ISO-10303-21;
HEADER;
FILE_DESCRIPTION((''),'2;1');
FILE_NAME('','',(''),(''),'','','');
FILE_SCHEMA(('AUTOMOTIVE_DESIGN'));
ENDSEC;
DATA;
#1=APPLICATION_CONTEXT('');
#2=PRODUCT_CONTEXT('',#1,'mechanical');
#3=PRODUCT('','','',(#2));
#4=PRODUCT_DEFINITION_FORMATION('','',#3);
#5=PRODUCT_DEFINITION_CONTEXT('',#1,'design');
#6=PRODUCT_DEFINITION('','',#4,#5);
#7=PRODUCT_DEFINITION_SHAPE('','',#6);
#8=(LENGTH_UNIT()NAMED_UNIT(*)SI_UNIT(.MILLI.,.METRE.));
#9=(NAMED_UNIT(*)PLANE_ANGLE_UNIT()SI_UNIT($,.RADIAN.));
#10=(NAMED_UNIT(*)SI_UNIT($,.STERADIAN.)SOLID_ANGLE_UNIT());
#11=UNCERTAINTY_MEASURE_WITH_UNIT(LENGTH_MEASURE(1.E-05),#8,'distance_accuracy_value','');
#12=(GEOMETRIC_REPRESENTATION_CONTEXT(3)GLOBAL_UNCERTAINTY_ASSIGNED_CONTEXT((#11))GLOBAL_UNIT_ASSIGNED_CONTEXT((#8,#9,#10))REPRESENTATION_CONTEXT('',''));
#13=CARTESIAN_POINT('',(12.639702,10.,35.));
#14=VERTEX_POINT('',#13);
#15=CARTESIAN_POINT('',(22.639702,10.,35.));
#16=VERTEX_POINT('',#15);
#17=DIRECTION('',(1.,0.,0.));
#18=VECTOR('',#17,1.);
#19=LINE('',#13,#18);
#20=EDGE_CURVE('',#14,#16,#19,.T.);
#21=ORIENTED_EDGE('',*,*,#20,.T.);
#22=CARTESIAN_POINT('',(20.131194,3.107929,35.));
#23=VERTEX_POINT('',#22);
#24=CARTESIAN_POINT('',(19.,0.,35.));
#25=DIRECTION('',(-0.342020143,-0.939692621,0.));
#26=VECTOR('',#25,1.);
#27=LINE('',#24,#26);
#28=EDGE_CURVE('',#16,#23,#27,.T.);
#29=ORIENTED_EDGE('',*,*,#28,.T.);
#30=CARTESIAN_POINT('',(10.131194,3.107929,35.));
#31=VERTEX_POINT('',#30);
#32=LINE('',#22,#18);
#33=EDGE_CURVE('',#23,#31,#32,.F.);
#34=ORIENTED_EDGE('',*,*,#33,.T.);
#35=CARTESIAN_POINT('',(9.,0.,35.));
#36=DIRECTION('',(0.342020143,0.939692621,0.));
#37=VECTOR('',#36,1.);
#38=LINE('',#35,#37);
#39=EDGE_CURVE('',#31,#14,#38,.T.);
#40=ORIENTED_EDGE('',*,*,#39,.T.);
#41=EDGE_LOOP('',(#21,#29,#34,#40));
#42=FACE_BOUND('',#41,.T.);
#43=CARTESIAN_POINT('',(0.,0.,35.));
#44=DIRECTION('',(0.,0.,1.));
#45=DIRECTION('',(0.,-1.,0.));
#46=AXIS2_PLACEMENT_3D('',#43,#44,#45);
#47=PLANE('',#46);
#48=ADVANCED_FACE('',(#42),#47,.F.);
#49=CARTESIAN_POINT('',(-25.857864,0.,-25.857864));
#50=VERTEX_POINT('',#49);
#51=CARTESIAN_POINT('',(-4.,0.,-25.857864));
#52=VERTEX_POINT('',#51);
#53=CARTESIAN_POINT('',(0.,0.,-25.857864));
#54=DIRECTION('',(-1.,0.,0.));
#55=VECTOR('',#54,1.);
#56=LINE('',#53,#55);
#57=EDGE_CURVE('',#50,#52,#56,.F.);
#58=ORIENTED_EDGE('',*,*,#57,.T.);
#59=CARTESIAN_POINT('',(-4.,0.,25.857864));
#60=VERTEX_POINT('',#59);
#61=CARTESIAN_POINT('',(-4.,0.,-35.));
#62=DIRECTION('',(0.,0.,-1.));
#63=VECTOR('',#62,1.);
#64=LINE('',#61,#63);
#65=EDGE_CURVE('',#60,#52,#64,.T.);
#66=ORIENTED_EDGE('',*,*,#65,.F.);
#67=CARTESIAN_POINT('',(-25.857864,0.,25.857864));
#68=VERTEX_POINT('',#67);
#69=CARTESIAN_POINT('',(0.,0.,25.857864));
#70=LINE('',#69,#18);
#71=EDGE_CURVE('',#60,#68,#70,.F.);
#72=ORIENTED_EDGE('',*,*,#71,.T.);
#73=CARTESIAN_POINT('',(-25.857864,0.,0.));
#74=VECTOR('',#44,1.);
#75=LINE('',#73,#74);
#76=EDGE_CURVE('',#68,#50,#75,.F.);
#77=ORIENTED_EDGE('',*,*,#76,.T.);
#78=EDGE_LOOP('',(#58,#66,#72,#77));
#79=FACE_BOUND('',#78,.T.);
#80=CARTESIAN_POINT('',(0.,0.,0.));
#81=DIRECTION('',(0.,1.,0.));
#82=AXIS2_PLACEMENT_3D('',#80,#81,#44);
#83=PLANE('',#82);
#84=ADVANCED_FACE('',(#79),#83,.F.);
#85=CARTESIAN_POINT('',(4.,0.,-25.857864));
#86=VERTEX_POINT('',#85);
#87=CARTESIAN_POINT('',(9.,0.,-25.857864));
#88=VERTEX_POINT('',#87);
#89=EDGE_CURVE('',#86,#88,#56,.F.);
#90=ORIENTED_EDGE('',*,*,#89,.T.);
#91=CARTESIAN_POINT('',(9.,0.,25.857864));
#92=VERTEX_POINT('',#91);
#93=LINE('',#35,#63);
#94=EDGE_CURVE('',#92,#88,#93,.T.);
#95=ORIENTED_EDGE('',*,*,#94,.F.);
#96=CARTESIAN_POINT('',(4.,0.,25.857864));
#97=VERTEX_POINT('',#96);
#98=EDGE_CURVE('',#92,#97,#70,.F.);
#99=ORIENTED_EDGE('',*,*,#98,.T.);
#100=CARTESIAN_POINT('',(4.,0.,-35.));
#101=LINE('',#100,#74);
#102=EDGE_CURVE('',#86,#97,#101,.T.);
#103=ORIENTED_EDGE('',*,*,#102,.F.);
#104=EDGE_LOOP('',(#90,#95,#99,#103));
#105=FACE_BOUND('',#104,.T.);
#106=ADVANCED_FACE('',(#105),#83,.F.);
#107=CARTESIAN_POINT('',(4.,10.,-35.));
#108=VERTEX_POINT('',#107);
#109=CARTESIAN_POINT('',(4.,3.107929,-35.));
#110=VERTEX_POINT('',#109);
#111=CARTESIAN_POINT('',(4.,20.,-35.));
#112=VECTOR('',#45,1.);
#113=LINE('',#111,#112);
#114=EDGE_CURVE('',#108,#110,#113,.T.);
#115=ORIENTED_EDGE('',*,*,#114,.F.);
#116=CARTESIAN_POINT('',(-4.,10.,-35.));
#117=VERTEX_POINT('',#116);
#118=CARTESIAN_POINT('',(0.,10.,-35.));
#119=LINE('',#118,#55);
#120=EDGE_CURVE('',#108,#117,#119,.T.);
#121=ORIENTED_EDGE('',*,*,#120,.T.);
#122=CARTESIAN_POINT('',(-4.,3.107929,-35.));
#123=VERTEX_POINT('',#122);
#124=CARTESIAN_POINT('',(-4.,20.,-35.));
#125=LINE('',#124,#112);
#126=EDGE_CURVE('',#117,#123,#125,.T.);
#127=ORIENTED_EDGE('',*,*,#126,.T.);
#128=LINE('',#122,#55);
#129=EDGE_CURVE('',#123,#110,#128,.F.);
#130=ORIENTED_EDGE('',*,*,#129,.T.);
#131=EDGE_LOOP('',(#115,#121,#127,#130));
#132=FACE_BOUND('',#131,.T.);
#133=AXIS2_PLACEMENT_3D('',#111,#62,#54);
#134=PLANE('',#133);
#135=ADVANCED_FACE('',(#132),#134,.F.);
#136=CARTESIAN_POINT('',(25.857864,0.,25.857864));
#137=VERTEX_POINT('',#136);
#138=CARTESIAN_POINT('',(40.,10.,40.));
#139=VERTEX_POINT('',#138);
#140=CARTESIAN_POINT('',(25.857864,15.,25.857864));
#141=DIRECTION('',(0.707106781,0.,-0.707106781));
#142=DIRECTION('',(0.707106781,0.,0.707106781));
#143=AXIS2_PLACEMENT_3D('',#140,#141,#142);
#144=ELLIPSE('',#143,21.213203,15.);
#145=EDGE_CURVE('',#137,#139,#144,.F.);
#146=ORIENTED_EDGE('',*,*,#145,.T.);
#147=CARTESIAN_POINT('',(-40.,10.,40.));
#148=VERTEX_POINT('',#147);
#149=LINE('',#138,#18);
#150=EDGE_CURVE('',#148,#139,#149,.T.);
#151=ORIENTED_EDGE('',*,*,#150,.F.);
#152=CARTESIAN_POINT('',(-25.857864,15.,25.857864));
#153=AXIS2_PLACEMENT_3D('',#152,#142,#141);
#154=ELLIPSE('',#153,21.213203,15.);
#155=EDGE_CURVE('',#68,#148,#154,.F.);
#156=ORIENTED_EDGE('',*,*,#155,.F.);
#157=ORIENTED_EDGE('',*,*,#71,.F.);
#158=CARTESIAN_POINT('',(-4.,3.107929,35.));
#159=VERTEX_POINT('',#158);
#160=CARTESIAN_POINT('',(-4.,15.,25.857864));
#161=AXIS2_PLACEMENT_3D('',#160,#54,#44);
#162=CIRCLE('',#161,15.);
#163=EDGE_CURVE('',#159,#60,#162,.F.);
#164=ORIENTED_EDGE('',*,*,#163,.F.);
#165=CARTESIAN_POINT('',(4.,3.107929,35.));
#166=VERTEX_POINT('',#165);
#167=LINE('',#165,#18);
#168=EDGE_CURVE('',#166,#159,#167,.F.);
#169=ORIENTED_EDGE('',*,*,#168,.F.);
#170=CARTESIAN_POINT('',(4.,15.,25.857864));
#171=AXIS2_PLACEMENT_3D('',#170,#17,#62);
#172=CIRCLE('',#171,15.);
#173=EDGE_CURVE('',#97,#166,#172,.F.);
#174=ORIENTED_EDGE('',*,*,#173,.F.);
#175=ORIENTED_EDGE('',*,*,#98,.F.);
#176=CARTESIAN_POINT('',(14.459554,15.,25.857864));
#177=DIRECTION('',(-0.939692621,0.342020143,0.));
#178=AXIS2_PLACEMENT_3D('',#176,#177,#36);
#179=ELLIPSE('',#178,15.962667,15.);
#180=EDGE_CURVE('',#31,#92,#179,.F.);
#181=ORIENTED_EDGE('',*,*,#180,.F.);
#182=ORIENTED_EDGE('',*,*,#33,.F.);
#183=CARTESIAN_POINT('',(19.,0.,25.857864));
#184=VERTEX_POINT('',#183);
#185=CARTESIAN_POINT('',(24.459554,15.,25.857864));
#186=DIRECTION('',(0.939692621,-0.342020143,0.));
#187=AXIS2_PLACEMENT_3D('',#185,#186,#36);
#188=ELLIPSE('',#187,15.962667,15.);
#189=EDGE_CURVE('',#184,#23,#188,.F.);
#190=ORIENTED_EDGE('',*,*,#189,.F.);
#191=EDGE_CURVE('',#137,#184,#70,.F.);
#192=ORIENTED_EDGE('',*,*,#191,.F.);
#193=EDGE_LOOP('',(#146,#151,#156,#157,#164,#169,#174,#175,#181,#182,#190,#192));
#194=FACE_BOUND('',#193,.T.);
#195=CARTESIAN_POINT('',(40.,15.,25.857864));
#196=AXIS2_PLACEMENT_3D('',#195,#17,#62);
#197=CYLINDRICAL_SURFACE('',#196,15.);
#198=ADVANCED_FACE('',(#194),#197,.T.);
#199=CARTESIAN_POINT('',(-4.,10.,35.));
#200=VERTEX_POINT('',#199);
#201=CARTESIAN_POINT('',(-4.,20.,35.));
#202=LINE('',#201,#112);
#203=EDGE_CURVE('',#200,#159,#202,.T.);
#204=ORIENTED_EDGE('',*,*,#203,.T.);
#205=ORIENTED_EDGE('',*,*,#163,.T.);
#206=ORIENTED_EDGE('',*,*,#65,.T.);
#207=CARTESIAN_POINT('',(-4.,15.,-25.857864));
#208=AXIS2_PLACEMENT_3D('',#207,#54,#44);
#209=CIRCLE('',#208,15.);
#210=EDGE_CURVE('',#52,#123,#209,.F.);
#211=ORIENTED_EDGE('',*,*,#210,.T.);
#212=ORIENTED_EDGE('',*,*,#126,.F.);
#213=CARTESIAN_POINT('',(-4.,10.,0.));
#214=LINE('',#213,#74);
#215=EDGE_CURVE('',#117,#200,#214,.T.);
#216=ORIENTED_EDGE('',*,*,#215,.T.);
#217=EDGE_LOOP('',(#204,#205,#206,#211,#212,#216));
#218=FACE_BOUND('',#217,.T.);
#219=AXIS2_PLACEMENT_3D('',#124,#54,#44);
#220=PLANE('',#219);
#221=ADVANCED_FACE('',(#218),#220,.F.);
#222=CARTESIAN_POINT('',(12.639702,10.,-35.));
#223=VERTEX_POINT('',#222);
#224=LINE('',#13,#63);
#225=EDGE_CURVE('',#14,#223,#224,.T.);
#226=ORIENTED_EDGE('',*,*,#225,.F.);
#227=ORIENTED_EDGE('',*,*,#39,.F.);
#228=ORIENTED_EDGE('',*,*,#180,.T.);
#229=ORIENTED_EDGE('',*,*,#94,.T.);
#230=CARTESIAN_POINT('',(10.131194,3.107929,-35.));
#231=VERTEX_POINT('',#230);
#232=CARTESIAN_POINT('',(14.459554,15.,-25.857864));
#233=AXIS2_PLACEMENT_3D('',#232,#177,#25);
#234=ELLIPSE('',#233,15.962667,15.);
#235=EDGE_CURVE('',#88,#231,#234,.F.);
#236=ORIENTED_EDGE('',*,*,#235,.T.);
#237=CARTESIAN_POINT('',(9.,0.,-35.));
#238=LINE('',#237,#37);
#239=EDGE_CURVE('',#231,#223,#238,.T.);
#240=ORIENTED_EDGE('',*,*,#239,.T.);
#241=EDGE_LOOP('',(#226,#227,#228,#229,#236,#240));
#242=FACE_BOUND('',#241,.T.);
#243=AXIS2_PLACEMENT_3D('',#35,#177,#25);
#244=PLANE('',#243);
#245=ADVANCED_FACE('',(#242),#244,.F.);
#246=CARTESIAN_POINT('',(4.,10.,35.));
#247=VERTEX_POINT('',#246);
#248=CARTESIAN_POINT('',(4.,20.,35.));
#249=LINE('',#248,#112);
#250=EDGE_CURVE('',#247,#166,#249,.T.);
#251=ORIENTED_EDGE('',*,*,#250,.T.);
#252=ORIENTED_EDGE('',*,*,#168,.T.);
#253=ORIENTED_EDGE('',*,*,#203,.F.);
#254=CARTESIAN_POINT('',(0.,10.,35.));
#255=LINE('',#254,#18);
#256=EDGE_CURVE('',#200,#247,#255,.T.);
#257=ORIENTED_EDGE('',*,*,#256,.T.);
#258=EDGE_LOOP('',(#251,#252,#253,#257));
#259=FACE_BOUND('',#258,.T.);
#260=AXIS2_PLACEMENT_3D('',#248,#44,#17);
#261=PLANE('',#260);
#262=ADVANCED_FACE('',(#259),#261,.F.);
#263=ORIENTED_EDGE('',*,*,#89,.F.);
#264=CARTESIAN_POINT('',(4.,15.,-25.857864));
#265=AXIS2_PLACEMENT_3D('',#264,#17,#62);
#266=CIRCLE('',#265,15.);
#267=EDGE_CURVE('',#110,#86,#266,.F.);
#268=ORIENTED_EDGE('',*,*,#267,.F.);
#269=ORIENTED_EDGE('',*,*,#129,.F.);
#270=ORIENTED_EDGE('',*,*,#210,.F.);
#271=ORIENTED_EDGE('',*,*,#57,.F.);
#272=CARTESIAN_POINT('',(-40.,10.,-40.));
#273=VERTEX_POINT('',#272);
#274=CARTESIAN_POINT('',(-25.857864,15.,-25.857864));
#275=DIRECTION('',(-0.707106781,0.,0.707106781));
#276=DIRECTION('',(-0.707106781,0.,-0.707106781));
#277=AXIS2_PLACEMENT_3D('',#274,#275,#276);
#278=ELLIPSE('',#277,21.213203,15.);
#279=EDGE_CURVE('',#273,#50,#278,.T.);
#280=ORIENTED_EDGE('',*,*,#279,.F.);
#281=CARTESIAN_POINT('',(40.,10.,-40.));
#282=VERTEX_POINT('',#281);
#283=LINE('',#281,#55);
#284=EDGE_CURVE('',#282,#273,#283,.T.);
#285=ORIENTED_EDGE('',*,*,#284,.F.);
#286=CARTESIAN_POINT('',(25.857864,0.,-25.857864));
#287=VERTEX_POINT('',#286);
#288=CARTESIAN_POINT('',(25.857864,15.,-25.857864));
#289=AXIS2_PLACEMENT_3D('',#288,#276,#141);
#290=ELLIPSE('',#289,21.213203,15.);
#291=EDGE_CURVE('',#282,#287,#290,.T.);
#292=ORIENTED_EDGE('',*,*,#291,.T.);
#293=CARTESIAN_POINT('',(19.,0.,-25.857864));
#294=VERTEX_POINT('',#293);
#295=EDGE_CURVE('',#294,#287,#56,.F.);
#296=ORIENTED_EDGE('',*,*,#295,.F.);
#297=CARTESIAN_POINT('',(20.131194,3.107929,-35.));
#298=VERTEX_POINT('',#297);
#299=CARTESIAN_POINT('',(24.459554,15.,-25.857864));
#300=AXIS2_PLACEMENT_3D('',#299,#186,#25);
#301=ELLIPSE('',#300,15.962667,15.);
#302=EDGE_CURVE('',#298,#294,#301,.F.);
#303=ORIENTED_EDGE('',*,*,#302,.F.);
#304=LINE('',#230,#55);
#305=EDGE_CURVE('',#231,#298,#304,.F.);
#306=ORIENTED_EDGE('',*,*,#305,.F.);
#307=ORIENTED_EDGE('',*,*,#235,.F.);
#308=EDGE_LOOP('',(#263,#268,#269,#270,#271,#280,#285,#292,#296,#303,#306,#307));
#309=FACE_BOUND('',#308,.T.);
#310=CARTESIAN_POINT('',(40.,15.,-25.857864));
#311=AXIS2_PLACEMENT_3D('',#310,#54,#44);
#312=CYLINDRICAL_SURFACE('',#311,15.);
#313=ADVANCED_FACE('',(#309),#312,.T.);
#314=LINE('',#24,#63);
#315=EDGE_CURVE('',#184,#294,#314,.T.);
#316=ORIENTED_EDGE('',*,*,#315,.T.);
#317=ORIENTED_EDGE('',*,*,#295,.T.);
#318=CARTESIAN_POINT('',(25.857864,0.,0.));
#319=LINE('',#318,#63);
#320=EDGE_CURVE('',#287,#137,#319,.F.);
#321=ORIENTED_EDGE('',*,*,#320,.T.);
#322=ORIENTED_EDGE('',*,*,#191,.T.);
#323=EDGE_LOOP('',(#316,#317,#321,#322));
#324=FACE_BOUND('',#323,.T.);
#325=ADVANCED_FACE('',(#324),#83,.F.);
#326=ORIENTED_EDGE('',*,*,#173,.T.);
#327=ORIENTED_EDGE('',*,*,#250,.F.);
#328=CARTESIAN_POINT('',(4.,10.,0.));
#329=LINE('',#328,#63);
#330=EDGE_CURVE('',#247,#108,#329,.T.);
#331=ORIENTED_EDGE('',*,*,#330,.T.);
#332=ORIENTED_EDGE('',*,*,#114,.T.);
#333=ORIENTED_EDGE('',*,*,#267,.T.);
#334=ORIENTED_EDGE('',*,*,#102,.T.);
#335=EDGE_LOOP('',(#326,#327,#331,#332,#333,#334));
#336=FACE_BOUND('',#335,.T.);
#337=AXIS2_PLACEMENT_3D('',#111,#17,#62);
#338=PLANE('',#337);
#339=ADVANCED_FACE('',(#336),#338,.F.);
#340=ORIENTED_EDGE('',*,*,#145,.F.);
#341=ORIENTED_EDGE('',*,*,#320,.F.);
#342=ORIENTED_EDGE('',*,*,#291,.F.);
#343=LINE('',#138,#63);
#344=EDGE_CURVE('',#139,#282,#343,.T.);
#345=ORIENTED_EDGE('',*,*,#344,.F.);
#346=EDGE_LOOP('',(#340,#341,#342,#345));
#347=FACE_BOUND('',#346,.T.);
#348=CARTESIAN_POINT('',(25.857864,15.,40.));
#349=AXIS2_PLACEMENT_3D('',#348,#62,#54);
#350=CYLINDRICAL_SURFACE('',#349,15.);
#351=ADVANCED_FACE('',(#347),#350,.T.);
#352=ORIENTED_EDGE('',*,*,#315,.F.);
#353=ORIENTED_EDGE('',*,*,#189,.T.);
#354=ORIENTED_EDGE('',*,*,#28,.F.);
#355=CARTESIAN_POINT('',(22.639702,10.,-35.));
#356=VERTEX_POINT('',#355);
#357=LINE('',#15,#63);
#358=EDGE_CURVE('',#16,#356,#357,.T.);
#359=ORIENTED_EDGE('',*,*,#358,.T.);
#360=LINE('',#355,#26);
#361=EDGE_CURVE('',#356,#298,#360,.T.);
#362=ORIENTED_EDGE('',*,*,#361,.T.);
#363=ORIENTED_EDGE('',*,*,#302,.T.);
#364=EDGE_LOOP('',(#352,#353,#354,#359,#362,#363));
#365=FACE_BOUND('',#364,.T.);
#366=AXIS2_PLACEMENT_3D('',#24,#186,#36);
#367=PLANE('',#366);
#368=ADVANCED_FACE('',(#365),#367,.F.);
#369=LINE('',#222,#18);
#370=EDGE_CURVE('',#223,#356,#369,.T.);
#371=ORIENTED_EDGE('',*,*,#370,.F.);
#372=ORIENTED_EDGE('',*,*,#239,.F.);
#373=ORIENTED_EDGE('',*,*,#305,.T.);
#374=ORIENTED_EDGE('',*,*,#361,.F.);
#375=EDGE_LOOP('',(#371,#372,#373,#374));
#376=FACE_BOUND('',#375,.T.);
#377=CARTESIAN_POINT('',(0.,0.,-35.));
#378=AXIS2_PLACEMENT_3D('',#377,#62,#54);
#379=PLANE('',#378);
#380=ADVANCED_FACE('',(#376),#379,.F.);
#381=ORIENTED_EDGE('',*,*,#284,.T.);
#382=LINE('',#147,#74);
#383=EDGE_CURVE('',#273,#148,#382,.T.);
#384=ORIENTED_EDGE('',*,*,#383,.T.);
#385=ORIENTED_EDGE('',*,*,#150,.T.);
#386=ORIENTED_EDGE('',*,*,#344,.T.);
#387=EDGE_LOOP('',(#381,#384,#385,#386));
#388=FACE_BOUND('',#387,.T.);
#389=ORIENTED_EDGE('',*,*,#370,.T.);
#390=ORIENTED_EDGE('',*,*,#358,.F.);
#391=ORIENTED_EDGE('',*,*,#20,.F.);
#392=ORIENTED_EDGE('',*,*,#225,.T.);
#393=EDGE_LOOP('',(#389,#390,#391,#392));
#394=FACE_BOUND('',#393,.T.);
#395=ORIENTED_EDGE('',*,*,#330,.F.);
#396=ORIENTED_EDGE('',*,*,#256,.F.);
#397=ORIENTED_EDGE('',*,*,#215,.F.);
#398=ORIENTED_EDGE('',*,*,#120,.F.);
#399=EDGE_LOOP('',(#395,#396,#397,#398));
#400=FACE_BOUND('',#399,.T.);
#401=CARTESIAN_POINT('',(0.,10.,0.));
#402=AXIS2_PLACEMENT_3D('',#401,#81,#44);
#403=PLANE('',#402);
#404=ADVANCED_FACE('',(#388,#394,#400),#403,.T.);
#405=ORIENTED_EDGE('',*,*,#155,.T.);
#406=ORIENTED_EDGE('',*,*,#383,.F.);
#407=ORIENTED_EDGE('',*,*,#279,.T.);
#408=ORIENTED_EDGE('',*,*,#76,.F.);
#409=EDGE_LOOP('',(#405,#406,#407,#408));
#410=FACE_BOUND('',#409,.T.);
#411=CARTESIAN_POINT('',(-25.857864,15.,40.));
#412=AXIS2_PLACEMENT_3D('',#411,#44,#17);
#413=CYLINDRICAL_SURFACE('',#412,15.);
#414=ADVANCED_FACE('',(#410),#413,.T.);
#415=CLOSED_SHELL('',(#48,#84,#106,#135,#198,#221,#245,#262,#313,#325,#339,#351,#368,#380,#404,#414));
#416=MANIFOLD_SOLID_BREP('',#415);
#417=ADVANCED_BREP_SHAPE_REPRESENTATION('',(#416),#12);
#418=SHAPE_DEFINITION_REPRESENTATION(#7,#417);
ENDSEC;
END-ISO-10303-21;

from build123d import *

# Parameters (mm, degrees)
SKETCH1_W           = 80
SKETCH1_H           = 80
BOSS_EXTRUDE1_DEPTH = 10
SKETCH2_W           = 8
SKETCH2_H           = 70
CUT_EXTRUDE1_DEPTH  = 20
CUT_EXTRUDE17_DEPTH = 75
BOSS_EXTRUDE2_DEPTH = 5
FILLET1_R           = 15


with BuildPart() as part:
    # Sketch1 → Boss-Extrude1 (new body)
    with BuildSketch(Plane(origin=(0, 0, 0), x_dir=(1, 0, 0), z_dir=(0, 1, 0))):
        Rectangle(SKETCH1_W, SKETCH1_H)
    extrude(amount=BOSS_EXTRUDE1_DEPTH)

    # Sketch2 → Cut-Extrude1 (cut)
    with BuildSketch(Plane.XZ):
        Rectangle(SKETCH2_W, SKETCH2_H)
    extrude(amount=-CUT_EXTRUDE1_DEPTH, mode=Mode.SUBTRACT)

    # Sketch8 → Cut-Extrude17 (cut)
    with BuildSketch(Plane(origin=(0, 0, -40), x_dir=(-1, 0, 0), z_dir=(0, 0, -1))):
        Polygon((-19, 0), (-22.639702343, 10), (-12.639702343, 10), (-9, 0), align=None)
    extrude(amount=-CUT_EXTRUDE17_DEPTH, mode=Mode.SUBTRACT)

    # Sketch10 → Boss-Extrude2 (add)
    with BuildSketch(Plane(origin=(0, 0, -40), x_dir=(-1, 0, 0), z_dir=(0, 0, -1))):
        Polygon((-9, 0), (-12.639702343, 10), (-22.639702343, 10), (-19, 0), align=None)
    extrude(amount=-BOSS_EXTRUDE2_DEPTH)

    # Fillet1
    # the kernel refuses this fillet: 15 mm, written as the material it takes off along each edge
    with BuildSketch(Plane(origin=(-40, 0, 75.355339059), x_dir=(1, 0, 0), z_dir=(0, 0, -1)), Plane(origin=(40, 0, -75.355339059), x_dir=(-1, 0, 0), z_dir=(0, 0, 1))) as fillet1_piece_1:
        with BuildLine():
            CenterArc((14.142135624, -15), FILLET1_R, 90, 70.528779366)
            Line((0, -10), (-0.282842712, -9.9))
            ThreePointArc((-0.282842712, -9.9), (-0.3, -5), (-0.3, 0))
            Line((-0.3, 0), (0, 0.3))
            Line((0, 0.3), (14.142135624, 0.3))
            Line((14.142135624, 0.3), (14.142135624, 0))
        make_face()
    extrude(amount=150.710678119, mode=Mode.SUBTRACT)
    with BuildSketch(Plane(origin=(-75.355339059, 0, -40), x_dir=(0, 1, 0), z_dir=(1, 0, 0)), Plane(origin=(75.355339059, 0, 40), x_dir=(0, 1, 0), z_dir=(-1, 0, 0))) as fillet1_piece_2:
        with BuildLine():
            CenterArc((15, 14.142135624), FILLET1_R, 180, 70.528779366)
            Line((0, 14.142135624), (-0.3, 14.142135624))
            Line((-0.3, 14.142135624), (-0.3, 0))
            Line((-0.3, 0), (0, -0.3))
            ThreePointArc((0, -0.3), (5, -0.3), (9.9, -0.282842712))
            Line((9.9, -0.282842712), (10, 0))
        make_face()
    extrude(amount=150.710678119, mode=Mode.SUBTRACT)


solid = part.part
